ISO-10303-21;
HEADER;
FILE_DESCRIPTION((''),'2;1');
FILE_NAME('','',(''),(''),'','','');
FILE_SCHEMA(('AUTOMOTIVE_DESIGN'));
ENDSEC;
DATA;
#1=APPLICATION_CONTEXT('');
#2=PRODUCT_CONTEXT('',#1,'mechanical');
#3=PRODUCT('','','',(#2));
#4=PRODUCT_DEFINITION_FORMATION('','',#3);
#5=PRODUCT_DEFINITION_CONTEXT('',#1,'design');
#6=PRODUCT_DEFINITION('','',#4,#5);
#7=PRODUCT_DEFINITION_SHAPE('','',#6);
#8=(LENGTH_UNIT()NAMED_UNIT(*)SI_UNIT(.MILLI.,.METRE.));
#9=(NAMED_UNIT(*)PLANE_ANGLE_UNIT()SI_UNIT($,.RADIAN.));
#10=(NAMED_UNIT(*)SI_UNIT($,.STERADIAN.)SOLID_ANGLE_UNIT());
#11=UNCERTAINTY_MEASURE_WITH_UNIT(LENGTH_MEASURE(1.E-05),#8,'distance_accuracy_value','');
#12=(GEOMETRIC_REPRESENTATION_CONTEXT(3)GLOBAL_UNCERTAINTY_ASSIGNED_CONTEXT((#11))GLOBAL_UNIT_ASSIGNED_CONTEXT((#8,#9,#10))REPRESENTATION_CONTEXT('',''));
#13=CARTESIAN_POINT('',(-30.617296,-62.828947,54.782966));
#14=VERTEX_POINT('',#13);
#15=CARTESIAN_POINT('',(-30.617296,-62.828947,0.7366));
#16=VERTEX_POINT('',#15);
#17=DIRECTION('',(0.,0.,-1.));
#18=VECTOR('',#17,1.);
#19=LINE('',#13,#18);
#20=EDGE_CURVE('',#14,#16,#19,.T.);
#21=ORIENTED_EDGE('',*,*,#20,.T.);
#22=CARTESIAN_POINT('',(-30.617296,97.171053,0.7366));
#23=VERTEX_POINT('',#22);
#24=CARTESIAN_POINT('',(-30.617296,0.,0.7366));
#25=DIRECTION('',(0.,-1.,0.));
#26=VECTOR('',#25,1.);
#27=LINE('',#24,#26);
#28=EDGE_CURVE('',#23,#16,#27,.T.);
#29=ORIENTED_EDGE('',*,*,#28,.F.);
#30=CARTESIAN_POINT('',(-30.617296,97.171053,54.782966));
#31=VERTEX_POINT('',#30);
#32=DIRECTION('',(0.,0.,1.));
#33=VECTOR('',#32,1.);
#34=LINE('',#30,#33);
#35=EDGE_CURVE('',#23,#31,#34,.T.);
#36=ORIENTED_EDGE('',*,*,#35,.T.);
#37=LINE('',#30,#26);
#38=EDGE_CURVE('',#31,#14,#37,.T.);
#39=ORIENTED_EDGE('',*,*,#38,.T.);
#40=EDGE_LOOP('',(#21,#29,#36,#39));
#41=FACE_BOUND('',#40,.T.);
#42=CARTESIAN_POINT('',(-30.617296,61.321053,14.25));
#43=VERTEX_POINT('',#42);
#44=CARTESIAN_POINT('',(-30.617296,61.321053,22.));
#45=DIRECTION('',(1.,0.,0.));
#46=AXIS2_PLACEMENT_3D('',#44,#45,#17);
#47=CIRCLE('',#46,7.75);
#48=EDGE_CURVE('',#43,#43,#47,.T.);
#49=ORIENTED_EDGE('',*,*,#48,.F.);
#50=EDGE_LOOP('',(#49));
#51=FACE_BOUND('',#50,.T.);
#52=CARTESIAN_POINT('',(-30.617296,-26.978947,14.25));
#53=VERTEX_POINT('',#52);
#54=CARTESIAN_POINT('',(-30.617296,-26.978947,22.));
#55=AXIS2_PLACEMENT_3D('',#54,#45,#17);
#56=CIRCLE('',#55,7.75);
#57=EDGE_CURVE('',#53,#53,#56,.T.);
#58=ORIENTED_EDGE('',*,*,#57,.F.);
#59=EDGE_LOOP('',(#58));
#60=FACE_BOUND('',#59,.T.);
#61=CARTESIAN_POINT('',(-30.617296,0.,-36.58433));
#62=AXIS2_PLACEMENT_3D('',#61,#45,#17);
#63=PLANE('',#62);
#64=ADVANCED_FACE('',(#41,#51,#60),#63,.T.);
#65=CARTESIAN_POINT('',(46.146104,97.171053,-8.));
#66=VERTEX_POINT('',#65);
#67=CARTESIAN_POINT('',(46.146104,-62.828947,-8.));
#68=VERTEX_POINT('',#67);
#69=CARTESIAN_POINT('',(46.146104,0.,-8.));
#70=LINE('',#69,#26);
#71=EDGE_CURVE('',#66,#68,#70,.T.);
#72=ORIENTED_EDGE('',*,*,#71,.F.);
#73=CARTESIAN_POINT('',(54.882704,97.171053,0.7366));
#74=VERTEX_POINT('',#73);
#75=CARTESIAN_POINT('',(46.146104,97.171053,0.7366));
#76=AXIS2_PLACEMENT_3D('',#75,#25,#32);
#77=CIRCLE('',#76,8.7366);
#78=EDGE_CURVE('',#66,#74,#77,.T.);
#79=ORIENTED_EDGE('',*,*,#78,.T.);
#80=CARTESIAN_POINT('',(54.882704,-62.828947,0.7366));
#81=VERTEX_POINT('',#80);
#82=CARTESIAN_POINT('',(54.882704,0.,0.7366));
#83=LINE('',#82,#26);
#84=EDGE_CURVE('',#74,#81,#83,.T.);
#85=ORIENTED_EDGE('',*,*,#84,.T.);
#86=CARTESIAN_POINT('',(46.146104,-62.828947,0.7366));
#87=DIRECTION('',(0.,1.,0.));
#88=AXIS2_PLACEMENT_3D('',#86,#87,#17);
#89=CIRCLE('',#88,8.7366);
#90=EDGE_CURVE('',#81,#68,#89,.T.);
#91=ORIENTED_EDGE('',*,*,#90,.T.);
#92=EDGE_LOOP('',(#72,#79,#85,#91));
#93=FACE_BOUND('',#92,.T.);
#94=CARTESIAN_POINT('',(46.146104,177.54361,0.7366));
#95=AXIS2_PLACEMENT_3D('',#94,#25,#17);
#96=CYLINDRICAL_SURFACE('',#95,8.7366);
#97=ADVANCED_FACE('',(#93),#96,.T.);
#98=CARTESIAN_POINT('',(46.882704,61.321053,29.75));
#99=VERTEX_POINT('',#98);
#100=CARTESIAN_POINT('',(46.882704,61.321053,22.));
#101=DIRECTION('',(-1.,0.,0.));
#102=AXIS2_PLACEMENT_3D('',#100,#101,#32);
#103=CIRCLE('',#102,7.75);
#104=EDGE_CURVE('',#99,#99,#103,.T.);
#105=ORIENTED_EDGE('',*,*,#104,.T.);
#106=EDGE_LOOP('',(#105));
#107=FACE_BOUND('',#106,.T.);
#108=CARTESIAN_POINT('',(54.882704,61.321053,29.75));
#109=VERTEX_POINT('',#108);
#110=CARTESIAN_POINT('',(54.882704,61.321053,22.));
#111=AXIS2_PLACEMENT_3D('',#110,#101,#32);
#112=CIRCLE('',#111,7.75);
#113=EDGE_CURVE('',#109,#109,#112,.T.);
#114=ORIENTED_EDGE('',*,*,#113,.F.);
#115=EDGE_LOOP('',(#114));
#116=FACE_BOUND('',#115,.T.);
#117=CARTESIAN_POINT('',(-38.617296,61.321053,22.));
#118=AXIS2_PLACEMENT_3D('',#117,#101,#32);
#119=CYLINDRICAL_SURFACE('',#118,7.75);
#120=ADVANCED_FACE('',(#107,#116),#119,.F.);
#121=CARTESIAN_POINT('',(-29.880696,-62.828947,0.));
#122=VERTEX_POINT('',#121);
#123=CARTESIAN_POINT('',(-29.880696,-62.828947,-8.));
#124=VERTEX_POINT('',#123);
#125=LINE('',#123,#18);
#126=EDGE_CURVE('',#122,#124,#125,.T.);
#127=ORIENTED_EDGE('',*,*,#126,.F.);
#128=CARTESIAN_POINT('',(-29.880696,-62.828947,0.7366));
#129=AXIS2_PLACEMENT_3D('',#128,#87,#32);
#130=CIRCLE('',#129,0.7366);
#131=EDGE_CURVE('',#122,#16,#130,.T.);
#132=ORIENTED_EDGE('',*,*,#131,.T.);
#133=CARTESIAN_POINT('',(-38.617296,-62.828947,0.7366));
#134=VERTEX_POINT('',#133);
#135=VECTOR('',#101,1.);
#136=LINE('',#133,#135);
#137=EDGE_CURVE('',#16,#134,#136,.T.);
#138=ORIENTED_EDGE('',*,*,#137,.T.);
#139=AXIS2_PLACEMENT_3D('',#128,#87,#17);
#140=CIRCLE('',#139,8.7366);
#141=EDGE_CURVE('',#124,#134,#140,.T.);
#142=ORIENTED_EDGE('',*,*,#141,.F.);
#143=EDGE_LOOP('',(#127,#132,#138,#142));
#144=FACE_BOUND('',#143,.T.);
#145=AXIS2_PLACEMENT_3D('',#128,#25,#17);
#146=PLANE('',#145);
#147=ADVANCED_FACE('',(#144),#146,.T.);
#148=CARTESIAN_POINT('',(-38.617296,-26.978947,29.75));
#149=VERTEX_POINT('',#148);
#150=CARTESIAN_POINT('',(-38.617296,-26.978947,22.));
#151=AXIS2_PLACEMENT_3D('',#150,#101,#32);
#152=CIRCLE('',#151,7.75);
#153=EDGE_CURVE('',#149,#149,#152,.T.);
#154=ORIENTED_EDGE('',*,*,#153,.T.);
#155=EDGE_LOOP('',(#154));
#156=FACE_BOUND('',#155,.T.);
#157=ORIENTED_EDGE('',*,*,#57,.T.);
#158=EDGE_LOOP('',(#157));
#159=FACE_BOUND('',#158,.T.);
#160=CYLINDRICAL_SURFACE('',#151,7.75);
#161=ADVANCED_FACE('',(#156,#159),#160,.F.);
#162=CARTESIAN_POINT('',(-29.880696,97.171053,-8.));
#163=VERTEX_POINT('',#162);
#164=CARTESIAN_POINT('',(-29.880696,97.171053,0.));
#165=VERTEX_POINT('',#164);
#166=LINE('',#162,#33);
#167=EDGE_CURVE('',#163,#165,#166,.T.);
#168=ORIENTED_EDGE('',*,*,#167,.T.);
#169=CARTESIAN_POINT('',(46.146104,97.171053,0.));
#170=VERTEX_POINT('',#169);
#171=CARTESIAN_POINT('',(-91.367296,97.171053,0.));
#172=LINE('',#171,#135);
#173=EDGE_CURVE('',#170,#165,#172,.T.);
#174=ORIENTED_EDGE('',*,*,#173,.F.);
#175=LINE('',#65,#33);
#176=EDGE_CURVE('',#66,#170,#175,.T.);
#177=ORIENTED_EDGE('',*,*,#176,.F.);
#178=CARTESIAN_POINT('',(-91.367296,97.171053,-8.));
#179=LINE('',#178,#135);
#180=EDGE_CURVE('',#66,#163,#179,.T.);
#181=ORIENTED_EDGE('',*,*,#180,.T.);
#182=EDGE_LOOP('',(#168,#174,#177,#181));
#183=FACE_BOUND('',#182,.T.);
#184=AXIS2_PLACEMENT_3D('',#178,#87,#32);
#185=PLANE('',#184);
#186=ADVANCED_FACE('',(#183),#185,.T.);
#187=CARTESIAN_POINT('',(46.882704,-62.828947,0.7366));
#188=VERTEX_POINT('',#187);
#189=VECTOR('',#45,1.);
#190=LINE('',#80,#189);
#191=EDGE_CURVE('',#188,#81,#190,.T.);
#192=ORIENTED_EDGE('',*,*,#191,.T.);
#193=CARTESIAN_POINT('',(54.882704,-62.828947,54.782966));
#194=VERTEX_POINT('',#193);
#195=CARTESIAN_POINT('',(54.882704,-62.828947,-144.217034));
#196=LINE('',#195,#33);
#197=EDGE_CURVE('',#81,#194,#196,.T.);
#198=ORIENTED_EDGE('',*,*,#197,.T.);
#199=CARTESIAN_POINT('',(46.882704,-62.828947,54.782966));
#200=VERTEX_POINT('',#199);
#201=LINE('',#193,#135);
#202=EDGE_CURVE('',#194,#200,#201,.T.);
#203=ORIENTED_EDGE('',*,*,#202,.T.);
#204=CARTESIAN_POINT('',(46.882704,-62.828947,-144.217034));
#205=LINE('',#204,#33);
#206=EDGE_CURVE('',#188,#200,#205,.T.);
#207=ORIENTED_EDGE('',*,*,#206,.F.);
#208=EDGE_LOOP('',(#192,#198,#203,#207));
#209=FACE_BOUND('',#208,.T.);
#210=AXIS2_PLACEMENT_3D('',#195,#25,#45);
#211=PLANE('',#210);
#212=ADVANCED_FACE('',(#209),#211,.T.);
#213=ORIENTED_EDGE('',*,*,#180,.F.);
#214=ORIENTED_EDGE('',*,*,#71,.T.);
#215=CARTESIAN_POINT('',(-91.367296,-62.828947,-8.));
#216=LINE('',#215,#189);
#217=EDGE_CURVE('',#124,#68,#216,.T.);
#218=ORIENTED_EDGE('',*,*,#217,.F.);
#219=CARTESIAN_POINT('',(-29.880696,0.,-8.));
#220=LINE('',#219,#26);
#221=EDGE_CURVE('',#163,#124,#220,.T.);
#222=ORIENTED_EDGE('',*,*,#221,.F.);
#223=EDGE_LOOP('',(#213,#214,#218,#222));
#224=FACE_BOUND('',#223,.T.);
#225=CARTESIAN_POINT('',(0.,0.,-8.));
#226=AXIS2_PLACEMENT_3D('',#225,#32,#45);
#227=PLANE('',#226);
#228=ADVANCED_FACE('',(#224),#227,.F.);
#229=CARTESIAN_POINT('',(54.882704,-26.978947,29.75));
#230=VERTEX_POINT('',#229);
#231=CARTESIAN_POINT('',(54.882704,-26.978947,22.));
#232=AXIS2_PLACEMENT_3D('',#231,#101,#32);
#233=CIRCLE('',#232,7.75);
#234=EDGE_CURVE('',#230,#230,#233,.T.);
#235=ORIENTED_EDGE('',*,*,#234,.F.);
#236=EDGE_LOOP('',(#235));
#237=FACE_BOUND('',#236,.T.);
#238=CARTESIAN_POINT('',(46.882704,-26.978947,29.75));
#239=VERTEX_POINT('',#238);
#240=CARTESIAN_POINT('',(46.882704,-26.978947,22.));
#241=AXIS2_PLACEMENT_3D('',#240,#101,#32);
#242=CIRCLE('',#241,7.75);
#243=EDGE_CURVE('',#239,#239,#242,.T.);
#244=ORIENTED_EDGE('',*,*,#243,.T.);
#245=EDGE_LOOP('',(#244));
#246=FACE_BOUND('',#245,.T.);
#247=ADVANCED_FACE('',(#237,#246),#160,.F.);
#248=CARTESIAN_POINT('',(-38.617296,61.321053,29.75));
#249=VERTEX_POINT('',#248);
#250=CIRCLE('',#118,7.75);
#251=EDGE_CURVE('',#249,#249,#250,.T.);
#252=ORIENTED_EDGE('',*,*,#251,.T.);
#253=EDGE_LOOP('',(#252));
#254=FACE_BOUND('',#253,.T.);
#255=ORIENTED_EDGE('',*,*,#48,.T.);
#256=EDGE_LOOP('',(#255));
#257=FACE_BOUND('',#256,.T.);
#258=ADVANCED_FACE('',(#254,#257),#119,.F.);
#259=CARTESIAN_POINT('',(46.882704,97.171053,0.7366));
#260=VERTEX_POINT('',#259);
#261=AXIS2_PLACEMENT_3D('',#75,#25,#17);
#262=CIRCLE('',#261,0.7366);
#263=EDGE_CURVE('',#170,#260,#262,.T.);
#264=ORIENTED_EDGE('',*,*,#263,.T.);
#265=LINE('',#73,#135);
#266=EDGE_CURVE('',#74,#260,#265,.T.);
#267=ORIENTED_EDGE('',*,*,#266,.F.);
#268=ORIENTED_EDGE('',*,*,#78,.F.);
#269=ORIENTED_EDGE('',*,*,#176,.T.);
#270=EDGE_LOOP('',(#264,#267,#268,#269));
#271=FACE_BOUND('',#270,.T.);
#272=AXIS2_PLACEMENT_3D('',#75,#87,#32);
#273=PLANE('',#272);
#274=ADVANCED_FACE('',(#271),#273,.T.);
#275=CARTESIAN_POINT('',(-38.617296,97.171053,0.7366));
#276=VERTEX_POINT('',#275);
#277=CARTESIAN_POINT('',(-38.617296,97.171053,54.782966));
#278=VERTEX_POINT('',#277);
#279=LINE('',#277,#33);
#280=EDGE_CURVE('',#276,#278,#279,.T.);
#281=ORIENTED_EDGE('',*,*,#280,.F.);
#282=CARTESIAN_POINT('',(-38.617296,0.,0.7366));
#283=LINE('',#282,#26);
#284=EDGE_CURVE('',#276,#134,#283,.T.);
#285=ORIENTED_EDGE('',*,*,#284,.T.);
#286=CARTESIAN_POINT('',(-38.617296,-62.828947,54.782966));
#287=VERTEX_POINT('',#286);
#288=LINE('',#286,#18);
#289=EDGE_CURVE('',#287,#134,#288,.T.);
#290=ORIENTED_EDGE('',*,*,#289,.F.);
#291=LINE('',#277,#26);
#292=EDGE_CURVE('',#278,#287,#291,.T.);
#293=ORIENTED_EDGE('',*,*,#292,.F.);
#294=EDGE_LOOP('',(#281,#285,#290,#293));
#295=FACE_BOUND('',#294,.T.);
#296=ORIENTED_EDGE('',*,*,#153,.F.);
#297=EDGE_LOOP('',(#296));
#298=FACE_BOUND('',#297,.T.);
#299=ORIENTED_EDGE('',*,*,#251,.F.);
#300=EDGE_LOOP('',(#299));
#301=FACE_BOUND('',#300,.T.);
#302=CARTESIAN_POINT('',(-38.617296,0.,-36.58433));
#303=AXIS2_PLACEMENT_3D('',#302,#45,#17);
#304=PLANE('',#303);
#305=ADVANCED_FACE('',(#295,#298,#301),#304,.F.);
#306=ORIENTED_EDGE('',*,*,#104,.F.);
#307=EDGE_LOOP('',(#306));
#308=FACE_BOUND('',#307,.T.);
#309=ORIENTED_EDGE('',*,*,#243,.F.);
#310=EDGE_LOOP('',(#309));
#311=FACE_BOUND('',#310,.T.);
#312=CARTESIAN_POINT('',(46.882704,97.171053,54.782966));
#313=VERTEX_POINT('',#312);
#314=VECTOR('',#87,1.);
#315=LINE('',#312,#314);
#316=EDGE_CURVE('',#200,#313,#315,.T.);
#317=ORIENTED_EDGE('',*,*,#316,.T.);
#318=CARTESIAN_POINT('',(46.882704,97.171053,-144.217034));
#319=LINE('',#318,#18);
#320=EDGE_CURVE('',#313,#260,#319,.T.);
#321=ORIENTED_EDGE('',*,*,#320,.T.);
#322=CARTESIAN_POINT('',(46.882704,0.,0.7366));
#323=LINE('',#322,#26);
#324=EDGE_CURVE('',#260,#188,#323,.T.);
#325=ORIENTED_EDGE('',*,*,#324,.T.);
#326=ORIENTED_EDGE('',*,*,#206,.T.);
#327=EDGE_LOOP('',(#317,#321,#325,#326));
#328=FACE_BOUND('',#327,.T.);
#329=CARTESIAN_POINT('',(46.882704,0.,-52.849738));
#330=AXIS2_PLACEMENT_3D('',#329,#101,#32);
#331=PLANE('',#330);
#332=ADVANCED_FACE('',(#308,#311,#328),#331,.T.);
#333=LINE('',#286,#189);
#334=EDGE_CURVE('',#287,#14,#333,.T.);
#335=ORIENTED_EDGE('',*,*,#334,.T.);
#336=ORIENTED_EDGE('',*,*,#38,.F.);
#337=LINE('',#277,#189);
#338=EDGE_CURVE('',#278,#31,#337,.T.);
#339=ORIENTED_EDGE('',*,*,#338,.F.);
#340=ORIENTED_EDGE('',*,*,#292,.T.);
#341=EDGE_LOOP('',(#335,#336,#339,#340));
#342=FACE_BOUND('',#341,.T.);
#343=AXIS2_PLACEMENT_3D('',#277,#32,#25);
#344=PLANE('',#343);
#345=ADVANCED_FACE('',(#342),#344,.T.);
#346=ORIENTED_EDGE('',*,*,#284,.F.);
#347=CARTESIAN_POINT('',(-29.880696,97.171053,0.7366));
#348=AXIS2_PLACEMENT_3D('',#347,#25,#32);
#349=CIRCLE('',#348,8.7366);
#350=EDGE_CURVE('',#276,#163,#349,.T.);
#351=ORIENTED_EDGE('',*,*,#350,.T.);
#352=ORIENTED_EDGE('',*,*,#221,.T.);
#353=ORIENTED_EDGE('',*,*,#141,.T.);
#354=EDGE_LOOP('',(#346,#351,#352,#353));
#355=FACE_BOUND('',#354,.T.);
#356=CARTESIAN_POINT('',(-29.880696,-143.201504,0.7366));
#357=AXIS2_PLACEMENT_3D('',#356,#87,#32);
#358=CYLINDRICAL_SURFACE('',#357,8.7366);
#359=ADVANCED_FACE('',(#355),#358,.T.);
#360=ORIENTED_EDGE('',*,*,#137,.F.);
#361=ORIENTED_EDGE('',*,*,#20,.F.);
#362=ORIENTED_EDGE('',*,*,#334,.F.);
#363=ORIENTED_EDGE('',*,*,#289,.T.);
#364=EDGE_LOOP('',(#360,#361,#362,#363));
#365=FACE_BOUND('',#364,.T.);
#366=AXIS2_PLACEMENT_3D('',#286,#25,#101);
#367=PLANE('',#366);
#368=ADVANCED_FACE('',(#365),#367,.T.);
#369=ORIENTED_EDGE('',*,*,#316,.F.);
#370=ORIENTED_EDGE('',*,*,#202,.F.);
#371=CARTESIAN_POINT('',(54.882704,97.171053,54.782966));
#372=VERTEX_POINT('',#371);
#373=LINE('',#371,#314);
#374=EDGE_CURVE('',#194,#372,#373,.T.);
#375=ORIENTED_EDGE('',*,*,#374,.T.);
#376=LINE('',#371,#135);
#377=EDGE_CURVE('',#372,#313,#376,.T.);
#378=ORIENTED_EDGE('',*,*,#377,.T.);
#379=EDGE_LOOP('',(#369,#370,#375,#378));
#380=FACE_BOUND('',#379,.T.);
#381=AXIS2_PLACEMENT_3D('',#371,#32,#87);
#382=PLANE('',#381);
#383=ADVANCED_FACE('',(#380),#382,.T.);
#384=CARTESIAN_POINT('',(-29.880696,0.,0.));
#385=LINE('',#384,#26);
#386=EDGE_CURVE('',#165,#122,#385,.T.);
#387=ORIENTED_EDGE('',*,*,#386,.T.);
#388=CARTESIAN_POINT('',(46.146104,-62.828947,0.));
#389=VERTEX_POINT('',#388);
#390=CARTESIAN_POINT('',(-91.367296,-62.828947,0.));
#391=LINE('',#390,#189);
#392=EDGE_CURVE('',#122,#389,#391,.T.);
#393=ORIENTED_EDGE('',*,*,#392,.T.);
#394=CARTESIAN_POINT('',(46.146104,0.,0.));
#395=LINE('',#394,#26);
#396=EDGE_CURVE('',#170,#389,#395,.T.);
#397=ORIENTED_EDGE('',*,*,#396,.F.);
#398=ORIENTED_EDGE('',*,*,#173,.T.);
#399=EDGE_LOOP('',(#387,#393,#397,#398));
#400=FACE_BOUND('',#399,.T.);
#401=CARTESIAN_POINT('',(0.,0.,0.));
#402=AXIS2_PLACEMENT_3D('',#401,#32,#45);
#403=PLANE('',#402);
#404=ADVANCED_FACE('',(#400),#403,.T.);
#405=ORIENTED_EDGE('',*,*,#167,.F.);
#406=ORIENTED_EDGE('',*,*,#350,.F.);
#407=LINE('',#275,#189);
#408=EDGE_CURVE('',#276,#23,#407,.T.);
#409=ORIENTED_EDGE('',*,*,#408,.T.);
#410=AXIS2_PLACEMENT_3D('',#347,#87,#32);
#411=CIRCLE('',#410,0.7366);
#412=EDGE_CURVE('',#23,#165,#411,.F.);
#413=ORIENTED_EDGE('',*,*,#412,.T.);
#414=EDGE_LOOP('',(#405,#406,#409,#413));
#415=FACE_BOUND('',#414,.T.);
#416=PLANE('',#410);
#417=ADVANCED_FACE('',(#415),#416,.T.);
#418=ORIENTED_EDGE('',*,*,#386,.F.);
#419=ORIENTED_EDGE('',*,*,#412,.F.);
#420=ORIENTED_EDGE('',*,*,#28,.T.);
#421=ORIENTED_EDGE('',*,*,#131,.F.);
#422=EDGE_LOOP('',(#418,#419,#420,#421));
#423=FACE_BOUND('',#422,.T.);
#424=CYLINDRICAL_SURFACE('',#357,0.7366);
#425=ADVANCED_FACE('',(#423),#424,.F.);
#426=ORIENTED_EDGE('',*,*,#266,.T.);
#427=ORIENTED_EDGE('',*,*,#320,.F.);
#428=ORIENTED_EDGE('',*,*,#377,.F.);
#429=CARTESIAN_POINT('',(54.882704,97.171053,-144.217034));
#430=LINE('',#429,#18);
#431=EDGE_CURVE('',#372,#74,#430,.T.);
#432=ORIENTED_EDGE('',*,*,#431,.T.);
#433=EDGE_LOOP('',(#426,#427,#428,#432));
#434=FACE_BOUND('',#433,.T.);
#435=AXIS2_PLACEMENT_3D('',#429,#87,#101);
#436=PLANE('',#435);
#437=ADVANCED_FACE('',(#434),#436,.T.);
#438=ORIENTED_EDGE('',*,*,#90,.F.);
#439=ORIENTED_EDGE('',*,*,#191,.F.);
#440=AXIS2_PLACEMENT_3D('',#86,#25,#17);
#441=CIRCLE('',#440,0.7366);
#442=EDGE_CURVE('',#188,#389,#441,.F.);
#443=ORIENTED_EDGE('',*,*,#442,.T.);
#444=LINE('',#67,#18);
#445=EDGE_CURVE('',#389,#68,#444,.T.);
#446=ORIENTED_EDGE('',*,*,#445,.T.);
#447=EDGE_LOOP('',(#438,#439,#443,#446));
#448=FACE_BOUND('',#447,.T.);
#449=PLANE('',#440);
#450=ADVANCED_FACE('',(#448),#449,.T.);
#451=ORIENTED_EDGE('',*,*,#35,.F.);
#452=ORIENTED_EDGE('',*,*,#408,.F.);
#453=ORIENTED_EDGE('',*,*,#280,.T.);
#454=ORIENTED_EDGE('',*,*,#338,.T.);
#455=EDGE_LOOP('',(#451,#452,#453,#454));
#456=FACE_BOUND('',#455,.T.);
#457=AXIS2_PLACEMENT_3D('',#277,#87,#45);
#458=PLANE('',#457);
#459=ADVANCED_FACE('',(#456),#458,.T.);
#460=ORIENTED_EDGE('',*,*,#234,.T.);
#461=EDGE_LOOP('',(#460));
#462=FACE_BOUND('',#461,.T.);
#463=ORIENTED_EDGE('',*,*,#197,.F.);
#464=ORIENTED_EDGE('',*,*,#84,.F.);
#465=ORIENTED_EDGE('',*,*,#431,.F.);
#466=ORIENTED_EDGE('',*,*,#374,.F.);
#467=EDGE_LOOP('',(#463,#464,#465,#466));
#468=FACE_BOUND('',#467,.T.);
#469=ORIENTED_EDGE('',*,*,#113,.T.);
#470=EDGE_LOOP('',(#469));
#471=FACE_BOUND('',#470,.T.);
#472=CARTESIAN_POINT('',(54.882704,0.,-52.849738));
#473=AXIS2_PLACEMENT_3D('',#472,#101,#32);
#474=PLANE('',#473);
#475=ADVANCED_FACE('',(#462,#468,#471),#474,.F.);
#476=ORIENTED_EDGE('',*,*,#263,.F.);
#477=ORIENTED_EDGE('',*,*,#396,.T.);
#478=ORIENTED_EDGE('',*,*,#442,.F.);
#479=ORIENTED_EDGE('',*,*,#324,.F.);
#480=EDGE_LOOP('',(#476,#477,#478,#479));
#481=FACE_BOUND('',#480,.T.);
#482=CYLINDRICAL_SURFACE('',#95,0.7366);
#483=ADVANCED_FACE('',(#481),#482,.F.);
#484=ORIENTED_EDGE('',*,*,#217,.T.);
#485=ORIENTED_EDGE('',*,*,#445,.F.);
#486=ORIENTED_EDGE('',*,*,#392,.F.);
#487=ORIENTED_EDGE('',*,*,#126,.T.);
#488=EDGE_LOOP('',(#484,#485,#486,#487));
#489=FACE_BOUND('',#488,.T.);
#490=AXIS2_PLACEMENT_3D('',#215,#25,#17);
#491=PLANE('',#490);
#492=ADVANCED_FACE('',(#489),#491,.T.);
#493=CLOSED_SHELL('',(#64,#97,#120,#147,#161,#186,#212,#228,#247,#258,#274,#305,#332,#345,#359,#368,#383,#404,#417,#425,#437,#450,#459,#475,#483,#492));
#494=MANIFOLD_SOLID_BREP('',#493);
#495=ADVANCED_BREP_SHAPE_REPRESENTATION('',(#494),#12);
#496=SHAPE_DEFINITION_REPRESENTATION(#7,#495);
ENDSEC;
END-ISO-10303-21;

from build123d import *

# Parameters (mm, degrees)
CROQUIS1_W                    = 199
CROQUIS1_H                    = 160
BRIDA_BASE1_DEPTH             = 8
PLIEGUE_START                 = -62.828947368
PLIEGUE_CROQUIZADO1_DEPTH     = 160
PLIEGUE_CROQUIZADO1_2_DEPTH   = 160
TALADRO_DE_MARGEN_PARA_M141_D = 15.5


# Read off the part's stored shape, not the designer's step: Pliegue croquizado1
# Sheet-metal steps are written as plain solids
with BuildPart() as part:
    # Croquis1 → Brida base1 (new body)
    with BuildSketch(Plane.XY):
        with Locations((8.132704294, 17.171052632)):
            Rectangle(CROQUIS1_W, CROQUIS1_H)
    extrude(amount=-BRIDA_BASE1_DEPTH)

    # Pliegue croquizado1 outline → Pliegue croquizado1 (cut)
    with BuildSketch(Plane(origin=(0, 0, 0), x_dir=(1, 0, 0), z_dir=(0, 1, 0)).offset(PLIEGUE_START)):
        with BuildLine():
            Line((107.632704294, 8), (46.146104294, 8))
            ThreePointArc((46.146104294, 8), (52.057652315, 5.696267134), (54.851596813, 0))
            Line((54.851596813, 0), (107.632704294, 0))
            Line((107.632704294, 0), (107.632704294, 8))
        make_face()
        with BuildLine():
            ThreePointArc((-38.586188225, 0), (-35.792243727, 5.696267134), (-29.880695706, 8))
            Line((-29.880695706, 8), (-91.367295706, 8))
            Line((-91.367295706, 8), (-91.367295706, 0))
            Line((-91.367295706, 0), (-38.586188225, 0))
        make_face()
    extrude(amount=PLIEGUE_CROQUIZADO1_DEPTH, mode=Mode.SUBTRACT)

    # Pliegue croquizado1 2 outline → Pliegue croquizado1 2 (add)
    with BuildSketch(Plane(origin=(0, 0, 0), x_dir=(1, 0, 0), z_dir=(0, 1, 0)).offset(PLIEGUE_START)):
        with BuildLine():
            ThreePointArc((54.882704294, -0.7366), (54.874923959, -0.36797172), (54.851596813, 0))
            Line((54.851596813, 0), (46.146104294, 0))
            ThreePointArc((46.146104294, 0), (46.666959149, -0.215745145), (46.882704294, -0.7366))
            Line((46.882704294, -0.7366), (46.882704294, -54.782966119))
            Line((46.882704294, -54.782966119), (54.882704294, -54.782966119))
            Line((54.882704294, -54.782966119), (54.882704294, -0.7366))
        make_face()
        with BuildLine():
            Line((-29.880695706, 0), (-38.586188225, 0))
            ThreePointArc((-38.586188225, 0), (-38.609515371, -0.36797172), (-38.617295706, -0.7366))
            Line((-38.617295706, -0.7366), (-38.617295706, -54.782966119))
            Line((-38.617295706, -54.782966119), (-30.617295706, -54.782966119))
            Line((-30.617295706, -54.782966119), (-30.617295706, -0.7366))
            ThreePointArc((-30.617295706, -0.7366), (-30.401550561, -0.215745145), (-29.880695706, 0))
        make_face()
    extrude(amount=PLIEGUE_CROQUIZADO1_2_DEPTH)

    # Taladro de margen para M141 (through all)
    with Locations(Plane.ZY.offset(38.617295706)):
        with Locations((22, -26.978947368), (22, 61.321052632)):
            Hole(TALADRO_DE_MARGEN_PARA_M141_D / 2)


solid = part.part
